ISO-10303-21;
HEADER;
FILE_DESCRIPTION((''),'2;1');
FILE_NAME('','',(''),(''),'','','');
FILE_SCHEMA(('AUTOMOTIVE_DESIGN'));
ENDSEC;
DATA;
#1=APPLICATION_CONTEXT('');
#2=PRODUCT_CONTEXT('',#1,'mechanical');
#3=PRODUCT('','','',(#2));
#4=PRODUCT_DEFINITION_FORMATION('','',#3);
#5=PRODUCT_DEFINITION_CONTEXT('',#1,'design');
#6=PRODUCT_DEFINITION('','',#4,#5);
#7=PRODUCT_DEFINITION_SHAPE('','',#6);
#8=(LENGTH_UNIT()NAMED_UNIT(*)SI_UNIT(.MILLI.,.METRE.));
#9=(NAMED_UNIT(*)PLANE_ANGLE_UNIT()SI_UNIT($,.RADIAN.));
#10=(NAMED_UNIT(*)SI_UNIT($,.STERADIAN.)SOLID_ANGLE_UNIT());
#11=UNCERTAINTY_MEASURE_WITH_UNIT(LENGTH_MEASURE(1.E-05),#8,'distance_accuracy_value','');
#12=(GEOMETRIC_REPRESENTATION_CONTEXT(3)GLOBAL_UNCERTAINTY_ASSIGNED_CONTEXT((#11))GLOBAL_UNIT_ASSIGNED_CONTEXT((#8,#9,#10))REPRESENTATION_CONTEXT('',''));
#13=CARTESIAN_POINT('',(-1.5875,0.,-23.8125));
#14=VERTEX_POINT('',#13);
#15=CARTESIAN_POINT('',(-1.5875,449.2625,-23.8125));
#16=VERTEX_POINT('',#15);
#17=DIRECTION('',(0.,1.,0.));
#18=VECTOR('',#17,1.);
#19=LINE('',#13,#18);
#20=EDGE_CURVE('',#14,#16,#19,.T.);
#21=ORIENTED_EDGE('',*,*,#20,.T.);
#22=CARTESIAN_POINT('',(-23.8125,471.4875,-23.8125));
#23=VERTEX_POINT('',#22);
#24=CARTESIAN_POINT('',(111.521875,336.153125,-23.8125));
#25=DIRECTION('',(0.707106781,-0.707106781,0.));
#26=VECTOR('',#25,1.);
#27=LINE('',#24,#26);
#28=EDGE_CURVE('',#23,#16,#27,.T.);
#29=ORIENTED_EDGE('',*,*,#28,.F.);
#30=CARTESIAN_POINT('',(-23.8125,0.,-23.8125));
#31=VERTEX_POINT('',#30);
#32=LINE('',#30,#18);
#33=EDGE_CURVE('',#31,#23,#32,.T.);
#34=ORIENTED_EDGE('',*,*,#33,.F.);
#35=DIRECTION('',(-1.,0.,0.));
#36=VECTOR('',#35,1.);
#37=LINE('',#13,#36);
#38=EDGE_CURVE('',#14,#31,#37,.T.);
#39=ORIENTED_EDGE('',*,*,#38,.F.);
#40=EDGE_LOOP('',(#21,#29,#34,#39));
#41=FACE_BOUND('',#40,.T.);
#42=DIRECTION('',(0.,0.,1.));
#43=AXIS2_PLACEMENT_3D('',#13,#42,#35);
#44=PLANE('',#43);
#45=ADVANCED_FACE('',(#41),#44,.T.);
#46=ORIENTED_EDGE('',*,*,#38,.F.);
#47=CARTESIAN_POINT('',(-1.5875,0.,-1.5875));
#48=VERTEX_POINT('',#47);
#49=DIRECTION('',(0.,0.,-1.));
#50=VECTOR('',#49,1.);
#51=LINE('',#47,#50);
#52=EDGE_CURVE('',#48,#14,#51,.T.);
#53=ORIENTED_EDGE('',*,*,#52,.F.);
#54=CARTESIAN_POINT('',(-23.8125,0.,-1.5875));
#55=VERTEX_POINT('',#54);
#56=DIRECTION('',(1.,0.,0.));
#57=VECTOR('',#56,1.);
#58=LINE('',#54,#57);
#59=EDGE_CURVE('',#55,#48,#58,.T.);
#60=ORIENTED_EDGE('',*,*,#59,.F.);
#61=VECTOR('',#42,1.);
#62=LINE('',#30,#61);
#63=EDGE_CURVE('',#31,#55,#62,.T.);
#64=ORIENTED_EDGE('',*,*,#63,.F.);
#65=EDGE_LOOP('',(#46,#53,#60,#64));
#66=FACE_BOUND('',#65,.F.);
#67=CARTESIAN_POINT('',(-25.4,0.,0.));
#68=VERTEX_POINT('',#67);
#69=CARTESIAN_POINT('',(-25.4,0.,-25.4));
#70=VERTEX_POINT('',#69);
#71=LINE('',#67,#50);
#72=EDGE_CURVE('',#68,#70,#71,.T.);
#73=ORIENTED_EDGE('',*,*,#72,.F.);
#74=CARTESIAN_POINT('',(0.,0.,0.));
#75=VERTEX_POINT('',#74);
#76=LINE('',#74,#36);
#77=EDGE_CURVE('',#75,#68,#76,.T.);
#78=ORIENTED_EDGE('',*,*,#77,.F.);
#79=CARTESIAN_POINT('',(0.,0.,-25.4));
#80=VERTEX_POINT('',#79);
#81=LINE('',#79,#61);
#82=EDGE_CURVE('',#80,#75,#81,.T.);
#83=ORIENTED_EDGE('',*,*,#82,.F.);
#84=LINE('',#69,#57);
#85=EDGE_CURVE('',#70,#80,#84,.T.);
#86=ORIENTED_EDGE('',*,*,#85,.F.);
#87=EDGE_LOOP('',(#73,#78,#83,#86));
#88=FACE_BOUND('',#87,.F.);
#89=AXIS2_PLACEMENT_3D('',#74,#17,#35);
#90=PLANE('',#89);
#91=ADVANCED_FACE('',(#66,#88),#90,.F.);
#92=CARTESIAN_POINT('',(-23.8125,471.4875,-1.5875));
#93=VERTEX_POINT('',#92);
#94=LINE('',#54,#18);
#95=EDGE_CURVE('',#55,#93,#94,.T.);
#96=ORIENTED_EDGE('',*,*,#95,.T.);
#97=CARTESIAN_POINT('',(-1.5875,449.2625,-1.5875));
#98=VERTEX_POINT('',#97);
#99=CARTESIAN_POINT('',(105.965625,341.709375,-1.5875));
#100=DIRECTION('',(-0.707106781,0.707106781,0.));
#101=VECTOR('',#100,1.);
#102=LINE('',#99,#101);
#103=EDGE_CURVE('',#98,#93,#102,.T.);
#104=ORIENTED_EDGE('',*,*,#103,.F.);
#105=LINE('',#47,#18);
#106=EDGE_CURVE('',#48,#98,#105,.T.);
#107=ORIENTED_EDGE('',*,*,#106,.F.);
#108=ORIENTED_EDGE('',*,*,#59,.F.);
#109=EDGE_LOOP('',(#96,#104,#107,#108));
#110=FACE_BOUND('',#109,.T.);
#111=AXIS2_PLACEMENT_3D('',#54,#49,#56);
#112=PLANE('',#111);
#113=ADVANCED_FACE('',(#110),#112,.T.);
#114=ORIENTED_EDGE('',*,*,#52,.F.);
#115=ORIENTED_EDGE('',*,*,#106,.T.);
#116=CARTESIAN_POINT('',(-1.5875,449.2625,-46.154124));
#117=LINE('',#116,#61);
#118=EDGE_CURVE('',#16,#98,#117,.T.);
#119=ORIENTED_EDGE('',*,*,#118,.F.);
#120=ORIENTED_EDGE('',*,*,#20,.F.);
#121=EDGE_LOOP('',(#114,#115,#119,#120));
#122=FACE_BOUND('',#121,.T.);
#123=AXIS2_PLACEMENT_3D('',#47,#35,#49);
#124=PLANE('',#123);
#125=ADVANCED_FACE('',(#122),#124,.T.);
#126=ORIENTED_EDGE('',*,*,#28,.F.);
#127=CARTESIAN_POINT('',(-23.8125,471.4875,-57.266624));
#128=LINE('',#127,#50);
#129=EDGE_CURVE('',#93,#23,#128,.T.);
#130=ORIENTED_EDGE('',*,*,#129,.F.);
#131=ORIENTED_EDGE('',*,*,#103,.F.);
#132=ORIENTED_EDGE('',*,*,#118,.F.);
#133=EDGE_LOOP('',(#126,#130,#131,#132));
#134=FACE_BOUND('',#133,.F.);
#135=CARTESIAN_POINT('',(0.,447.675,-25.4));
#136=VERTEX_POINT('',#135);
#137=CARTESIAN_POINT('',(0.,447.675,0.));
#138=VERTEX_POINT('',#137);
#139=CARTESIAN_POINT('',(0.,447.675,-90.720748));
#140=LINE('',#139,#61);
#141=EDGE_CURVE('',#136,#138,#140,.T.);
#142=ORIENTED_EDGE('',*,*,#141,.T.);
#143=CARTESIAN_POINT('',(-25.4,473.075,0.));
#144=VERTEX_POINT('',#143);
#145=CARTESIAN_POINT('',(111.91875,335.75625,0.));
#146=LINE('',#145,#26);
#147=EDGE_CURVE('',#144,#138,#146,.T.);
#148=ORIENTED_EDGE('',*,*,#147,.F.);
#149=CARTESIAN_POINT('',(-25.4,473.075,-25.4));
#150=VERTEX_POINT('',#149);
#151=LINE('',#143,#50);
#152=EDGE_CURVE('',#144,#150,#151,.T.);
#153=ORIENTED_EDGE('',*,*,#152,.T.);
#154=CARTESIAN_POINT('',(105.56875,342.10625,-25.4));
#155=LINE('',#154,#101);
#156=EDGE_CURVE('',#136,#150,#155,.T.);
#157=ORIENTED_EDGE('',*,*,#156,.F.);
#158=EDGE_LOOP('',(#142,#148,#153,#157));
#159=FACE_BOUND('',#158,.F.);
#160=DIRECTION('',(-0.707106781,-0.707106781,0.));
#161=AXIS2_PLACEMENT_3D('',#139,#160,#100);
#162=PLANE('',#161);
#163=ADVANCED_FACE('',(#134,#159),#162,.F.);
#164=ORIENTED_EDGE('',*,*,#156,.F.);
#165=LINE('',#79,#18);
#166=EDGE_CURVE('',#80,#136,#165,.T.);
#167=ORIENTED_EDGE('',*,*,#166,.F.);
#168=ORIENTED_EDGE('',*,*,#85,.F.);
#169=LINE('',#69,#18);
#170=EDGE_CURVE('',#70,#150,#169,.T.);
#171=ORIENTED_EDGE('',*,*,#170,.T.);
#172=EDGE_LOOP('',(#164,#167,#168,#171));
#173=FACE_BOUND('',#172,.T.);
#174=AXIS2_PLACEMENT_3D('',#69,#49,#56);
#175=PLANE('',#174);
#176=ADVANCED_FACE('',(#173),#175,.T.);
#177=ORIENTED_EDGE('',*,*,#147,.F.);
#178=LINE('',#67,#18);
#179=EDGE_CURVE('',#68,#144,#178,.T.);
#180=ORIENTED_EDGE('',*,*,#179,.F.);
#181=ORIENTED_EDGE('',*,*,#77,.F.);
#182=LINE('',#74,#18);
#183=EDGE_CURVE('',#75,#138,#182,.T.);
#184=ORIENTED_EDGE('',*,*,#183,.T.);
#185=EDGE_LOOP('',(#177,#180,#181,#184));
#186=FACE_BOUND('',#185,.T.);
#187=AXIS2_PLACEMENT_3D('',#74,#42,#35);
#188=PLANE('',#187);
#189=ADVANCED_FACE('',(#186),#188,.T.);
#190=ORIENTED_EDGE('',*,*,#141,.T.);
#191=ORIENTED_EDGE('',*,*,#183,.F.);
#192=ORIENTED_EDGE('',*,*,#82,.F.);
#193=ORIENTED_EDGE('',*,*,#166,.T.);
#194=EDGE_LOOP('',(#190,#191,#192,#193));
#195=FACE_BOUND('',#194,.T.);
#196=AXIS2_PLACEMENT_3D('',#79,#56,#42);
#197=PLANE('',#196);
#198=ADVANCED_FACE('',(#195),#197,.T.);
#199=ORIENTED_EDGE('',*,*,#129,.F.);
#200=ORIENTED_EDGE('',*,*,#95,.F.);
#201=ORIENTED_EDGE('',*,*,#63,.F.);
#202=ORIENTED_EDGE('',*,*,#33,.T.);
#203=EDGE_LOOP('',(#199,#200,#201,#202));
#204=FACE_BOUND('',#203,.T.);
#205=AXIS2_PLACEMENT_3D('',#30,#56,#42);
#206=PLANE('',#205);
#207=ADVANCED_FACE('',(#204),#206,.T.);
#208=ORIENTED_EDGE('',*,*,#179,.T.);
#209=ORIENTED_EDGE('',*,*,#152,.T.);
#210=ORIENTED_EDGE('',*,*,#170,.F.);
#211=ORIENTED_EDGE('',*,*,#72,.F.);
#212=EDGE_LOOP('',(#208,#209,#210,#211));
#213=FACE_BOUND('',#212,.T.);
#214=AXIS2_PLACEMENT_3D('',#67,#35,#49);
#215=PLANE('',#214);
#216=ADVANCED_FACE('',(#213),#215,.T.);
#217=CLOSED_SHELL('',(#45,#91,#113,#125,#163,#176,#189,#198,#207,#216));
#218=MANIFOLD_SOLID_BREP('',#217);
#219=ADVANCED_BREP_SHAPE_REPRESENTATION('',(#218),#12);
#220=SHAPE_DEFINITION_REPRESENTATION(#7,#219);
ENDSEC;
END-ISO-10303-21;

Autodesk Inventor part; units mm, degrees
ref_plane "YZ Plane" through (0, 0, 0) normal (1, 0, 0) x (0, 1, 0)
ref_plane "XZ Plane" through (0, 0, 0) normal (0, 1, 0) x (-1, 0, 0)
ref_plane "XY Plane" through (0, 0, 0) normal (0, 0, 1) x (1, 0, 0)
sketch "Sketch1" plane through (0, 0, 0) normal (0, 1, 0) x (-1, 0, 0)
  line L0 (0, 0) -> (25.4, 0)
  line L1 (25.4, 0) -> (25.4, -25.4)
  line L2 (25.4, -25.4) -> (0, -25.4)
  line L3 (0, -25.4) -> (0, 0)
  line L4 (23.8125, -1.5875) -> (1.5875, -1.5875)
  line L5 (1.5875, -1.5875) -> (1.5875, -23.8125)
  line L6 (1.5875, -23.8125) -> (23.8125, -23.8125)
  line L7 (23.8125, -23.8125) -> (23.8125, -1.5875)
  dimension "d0" = 25.4
  dimension "d1" = 25.4
  dimension "d2" = 1.5875
extrude "Extrusion1" add sketch "Sketch1" along normal blind 473.075
chamfer "Chamfer1" distance 25.4 angle 45 1 edges at (0, 473.075, -12.7)
properties part number "SUP_001_CornerVertical" material "Aluminum 6061"
